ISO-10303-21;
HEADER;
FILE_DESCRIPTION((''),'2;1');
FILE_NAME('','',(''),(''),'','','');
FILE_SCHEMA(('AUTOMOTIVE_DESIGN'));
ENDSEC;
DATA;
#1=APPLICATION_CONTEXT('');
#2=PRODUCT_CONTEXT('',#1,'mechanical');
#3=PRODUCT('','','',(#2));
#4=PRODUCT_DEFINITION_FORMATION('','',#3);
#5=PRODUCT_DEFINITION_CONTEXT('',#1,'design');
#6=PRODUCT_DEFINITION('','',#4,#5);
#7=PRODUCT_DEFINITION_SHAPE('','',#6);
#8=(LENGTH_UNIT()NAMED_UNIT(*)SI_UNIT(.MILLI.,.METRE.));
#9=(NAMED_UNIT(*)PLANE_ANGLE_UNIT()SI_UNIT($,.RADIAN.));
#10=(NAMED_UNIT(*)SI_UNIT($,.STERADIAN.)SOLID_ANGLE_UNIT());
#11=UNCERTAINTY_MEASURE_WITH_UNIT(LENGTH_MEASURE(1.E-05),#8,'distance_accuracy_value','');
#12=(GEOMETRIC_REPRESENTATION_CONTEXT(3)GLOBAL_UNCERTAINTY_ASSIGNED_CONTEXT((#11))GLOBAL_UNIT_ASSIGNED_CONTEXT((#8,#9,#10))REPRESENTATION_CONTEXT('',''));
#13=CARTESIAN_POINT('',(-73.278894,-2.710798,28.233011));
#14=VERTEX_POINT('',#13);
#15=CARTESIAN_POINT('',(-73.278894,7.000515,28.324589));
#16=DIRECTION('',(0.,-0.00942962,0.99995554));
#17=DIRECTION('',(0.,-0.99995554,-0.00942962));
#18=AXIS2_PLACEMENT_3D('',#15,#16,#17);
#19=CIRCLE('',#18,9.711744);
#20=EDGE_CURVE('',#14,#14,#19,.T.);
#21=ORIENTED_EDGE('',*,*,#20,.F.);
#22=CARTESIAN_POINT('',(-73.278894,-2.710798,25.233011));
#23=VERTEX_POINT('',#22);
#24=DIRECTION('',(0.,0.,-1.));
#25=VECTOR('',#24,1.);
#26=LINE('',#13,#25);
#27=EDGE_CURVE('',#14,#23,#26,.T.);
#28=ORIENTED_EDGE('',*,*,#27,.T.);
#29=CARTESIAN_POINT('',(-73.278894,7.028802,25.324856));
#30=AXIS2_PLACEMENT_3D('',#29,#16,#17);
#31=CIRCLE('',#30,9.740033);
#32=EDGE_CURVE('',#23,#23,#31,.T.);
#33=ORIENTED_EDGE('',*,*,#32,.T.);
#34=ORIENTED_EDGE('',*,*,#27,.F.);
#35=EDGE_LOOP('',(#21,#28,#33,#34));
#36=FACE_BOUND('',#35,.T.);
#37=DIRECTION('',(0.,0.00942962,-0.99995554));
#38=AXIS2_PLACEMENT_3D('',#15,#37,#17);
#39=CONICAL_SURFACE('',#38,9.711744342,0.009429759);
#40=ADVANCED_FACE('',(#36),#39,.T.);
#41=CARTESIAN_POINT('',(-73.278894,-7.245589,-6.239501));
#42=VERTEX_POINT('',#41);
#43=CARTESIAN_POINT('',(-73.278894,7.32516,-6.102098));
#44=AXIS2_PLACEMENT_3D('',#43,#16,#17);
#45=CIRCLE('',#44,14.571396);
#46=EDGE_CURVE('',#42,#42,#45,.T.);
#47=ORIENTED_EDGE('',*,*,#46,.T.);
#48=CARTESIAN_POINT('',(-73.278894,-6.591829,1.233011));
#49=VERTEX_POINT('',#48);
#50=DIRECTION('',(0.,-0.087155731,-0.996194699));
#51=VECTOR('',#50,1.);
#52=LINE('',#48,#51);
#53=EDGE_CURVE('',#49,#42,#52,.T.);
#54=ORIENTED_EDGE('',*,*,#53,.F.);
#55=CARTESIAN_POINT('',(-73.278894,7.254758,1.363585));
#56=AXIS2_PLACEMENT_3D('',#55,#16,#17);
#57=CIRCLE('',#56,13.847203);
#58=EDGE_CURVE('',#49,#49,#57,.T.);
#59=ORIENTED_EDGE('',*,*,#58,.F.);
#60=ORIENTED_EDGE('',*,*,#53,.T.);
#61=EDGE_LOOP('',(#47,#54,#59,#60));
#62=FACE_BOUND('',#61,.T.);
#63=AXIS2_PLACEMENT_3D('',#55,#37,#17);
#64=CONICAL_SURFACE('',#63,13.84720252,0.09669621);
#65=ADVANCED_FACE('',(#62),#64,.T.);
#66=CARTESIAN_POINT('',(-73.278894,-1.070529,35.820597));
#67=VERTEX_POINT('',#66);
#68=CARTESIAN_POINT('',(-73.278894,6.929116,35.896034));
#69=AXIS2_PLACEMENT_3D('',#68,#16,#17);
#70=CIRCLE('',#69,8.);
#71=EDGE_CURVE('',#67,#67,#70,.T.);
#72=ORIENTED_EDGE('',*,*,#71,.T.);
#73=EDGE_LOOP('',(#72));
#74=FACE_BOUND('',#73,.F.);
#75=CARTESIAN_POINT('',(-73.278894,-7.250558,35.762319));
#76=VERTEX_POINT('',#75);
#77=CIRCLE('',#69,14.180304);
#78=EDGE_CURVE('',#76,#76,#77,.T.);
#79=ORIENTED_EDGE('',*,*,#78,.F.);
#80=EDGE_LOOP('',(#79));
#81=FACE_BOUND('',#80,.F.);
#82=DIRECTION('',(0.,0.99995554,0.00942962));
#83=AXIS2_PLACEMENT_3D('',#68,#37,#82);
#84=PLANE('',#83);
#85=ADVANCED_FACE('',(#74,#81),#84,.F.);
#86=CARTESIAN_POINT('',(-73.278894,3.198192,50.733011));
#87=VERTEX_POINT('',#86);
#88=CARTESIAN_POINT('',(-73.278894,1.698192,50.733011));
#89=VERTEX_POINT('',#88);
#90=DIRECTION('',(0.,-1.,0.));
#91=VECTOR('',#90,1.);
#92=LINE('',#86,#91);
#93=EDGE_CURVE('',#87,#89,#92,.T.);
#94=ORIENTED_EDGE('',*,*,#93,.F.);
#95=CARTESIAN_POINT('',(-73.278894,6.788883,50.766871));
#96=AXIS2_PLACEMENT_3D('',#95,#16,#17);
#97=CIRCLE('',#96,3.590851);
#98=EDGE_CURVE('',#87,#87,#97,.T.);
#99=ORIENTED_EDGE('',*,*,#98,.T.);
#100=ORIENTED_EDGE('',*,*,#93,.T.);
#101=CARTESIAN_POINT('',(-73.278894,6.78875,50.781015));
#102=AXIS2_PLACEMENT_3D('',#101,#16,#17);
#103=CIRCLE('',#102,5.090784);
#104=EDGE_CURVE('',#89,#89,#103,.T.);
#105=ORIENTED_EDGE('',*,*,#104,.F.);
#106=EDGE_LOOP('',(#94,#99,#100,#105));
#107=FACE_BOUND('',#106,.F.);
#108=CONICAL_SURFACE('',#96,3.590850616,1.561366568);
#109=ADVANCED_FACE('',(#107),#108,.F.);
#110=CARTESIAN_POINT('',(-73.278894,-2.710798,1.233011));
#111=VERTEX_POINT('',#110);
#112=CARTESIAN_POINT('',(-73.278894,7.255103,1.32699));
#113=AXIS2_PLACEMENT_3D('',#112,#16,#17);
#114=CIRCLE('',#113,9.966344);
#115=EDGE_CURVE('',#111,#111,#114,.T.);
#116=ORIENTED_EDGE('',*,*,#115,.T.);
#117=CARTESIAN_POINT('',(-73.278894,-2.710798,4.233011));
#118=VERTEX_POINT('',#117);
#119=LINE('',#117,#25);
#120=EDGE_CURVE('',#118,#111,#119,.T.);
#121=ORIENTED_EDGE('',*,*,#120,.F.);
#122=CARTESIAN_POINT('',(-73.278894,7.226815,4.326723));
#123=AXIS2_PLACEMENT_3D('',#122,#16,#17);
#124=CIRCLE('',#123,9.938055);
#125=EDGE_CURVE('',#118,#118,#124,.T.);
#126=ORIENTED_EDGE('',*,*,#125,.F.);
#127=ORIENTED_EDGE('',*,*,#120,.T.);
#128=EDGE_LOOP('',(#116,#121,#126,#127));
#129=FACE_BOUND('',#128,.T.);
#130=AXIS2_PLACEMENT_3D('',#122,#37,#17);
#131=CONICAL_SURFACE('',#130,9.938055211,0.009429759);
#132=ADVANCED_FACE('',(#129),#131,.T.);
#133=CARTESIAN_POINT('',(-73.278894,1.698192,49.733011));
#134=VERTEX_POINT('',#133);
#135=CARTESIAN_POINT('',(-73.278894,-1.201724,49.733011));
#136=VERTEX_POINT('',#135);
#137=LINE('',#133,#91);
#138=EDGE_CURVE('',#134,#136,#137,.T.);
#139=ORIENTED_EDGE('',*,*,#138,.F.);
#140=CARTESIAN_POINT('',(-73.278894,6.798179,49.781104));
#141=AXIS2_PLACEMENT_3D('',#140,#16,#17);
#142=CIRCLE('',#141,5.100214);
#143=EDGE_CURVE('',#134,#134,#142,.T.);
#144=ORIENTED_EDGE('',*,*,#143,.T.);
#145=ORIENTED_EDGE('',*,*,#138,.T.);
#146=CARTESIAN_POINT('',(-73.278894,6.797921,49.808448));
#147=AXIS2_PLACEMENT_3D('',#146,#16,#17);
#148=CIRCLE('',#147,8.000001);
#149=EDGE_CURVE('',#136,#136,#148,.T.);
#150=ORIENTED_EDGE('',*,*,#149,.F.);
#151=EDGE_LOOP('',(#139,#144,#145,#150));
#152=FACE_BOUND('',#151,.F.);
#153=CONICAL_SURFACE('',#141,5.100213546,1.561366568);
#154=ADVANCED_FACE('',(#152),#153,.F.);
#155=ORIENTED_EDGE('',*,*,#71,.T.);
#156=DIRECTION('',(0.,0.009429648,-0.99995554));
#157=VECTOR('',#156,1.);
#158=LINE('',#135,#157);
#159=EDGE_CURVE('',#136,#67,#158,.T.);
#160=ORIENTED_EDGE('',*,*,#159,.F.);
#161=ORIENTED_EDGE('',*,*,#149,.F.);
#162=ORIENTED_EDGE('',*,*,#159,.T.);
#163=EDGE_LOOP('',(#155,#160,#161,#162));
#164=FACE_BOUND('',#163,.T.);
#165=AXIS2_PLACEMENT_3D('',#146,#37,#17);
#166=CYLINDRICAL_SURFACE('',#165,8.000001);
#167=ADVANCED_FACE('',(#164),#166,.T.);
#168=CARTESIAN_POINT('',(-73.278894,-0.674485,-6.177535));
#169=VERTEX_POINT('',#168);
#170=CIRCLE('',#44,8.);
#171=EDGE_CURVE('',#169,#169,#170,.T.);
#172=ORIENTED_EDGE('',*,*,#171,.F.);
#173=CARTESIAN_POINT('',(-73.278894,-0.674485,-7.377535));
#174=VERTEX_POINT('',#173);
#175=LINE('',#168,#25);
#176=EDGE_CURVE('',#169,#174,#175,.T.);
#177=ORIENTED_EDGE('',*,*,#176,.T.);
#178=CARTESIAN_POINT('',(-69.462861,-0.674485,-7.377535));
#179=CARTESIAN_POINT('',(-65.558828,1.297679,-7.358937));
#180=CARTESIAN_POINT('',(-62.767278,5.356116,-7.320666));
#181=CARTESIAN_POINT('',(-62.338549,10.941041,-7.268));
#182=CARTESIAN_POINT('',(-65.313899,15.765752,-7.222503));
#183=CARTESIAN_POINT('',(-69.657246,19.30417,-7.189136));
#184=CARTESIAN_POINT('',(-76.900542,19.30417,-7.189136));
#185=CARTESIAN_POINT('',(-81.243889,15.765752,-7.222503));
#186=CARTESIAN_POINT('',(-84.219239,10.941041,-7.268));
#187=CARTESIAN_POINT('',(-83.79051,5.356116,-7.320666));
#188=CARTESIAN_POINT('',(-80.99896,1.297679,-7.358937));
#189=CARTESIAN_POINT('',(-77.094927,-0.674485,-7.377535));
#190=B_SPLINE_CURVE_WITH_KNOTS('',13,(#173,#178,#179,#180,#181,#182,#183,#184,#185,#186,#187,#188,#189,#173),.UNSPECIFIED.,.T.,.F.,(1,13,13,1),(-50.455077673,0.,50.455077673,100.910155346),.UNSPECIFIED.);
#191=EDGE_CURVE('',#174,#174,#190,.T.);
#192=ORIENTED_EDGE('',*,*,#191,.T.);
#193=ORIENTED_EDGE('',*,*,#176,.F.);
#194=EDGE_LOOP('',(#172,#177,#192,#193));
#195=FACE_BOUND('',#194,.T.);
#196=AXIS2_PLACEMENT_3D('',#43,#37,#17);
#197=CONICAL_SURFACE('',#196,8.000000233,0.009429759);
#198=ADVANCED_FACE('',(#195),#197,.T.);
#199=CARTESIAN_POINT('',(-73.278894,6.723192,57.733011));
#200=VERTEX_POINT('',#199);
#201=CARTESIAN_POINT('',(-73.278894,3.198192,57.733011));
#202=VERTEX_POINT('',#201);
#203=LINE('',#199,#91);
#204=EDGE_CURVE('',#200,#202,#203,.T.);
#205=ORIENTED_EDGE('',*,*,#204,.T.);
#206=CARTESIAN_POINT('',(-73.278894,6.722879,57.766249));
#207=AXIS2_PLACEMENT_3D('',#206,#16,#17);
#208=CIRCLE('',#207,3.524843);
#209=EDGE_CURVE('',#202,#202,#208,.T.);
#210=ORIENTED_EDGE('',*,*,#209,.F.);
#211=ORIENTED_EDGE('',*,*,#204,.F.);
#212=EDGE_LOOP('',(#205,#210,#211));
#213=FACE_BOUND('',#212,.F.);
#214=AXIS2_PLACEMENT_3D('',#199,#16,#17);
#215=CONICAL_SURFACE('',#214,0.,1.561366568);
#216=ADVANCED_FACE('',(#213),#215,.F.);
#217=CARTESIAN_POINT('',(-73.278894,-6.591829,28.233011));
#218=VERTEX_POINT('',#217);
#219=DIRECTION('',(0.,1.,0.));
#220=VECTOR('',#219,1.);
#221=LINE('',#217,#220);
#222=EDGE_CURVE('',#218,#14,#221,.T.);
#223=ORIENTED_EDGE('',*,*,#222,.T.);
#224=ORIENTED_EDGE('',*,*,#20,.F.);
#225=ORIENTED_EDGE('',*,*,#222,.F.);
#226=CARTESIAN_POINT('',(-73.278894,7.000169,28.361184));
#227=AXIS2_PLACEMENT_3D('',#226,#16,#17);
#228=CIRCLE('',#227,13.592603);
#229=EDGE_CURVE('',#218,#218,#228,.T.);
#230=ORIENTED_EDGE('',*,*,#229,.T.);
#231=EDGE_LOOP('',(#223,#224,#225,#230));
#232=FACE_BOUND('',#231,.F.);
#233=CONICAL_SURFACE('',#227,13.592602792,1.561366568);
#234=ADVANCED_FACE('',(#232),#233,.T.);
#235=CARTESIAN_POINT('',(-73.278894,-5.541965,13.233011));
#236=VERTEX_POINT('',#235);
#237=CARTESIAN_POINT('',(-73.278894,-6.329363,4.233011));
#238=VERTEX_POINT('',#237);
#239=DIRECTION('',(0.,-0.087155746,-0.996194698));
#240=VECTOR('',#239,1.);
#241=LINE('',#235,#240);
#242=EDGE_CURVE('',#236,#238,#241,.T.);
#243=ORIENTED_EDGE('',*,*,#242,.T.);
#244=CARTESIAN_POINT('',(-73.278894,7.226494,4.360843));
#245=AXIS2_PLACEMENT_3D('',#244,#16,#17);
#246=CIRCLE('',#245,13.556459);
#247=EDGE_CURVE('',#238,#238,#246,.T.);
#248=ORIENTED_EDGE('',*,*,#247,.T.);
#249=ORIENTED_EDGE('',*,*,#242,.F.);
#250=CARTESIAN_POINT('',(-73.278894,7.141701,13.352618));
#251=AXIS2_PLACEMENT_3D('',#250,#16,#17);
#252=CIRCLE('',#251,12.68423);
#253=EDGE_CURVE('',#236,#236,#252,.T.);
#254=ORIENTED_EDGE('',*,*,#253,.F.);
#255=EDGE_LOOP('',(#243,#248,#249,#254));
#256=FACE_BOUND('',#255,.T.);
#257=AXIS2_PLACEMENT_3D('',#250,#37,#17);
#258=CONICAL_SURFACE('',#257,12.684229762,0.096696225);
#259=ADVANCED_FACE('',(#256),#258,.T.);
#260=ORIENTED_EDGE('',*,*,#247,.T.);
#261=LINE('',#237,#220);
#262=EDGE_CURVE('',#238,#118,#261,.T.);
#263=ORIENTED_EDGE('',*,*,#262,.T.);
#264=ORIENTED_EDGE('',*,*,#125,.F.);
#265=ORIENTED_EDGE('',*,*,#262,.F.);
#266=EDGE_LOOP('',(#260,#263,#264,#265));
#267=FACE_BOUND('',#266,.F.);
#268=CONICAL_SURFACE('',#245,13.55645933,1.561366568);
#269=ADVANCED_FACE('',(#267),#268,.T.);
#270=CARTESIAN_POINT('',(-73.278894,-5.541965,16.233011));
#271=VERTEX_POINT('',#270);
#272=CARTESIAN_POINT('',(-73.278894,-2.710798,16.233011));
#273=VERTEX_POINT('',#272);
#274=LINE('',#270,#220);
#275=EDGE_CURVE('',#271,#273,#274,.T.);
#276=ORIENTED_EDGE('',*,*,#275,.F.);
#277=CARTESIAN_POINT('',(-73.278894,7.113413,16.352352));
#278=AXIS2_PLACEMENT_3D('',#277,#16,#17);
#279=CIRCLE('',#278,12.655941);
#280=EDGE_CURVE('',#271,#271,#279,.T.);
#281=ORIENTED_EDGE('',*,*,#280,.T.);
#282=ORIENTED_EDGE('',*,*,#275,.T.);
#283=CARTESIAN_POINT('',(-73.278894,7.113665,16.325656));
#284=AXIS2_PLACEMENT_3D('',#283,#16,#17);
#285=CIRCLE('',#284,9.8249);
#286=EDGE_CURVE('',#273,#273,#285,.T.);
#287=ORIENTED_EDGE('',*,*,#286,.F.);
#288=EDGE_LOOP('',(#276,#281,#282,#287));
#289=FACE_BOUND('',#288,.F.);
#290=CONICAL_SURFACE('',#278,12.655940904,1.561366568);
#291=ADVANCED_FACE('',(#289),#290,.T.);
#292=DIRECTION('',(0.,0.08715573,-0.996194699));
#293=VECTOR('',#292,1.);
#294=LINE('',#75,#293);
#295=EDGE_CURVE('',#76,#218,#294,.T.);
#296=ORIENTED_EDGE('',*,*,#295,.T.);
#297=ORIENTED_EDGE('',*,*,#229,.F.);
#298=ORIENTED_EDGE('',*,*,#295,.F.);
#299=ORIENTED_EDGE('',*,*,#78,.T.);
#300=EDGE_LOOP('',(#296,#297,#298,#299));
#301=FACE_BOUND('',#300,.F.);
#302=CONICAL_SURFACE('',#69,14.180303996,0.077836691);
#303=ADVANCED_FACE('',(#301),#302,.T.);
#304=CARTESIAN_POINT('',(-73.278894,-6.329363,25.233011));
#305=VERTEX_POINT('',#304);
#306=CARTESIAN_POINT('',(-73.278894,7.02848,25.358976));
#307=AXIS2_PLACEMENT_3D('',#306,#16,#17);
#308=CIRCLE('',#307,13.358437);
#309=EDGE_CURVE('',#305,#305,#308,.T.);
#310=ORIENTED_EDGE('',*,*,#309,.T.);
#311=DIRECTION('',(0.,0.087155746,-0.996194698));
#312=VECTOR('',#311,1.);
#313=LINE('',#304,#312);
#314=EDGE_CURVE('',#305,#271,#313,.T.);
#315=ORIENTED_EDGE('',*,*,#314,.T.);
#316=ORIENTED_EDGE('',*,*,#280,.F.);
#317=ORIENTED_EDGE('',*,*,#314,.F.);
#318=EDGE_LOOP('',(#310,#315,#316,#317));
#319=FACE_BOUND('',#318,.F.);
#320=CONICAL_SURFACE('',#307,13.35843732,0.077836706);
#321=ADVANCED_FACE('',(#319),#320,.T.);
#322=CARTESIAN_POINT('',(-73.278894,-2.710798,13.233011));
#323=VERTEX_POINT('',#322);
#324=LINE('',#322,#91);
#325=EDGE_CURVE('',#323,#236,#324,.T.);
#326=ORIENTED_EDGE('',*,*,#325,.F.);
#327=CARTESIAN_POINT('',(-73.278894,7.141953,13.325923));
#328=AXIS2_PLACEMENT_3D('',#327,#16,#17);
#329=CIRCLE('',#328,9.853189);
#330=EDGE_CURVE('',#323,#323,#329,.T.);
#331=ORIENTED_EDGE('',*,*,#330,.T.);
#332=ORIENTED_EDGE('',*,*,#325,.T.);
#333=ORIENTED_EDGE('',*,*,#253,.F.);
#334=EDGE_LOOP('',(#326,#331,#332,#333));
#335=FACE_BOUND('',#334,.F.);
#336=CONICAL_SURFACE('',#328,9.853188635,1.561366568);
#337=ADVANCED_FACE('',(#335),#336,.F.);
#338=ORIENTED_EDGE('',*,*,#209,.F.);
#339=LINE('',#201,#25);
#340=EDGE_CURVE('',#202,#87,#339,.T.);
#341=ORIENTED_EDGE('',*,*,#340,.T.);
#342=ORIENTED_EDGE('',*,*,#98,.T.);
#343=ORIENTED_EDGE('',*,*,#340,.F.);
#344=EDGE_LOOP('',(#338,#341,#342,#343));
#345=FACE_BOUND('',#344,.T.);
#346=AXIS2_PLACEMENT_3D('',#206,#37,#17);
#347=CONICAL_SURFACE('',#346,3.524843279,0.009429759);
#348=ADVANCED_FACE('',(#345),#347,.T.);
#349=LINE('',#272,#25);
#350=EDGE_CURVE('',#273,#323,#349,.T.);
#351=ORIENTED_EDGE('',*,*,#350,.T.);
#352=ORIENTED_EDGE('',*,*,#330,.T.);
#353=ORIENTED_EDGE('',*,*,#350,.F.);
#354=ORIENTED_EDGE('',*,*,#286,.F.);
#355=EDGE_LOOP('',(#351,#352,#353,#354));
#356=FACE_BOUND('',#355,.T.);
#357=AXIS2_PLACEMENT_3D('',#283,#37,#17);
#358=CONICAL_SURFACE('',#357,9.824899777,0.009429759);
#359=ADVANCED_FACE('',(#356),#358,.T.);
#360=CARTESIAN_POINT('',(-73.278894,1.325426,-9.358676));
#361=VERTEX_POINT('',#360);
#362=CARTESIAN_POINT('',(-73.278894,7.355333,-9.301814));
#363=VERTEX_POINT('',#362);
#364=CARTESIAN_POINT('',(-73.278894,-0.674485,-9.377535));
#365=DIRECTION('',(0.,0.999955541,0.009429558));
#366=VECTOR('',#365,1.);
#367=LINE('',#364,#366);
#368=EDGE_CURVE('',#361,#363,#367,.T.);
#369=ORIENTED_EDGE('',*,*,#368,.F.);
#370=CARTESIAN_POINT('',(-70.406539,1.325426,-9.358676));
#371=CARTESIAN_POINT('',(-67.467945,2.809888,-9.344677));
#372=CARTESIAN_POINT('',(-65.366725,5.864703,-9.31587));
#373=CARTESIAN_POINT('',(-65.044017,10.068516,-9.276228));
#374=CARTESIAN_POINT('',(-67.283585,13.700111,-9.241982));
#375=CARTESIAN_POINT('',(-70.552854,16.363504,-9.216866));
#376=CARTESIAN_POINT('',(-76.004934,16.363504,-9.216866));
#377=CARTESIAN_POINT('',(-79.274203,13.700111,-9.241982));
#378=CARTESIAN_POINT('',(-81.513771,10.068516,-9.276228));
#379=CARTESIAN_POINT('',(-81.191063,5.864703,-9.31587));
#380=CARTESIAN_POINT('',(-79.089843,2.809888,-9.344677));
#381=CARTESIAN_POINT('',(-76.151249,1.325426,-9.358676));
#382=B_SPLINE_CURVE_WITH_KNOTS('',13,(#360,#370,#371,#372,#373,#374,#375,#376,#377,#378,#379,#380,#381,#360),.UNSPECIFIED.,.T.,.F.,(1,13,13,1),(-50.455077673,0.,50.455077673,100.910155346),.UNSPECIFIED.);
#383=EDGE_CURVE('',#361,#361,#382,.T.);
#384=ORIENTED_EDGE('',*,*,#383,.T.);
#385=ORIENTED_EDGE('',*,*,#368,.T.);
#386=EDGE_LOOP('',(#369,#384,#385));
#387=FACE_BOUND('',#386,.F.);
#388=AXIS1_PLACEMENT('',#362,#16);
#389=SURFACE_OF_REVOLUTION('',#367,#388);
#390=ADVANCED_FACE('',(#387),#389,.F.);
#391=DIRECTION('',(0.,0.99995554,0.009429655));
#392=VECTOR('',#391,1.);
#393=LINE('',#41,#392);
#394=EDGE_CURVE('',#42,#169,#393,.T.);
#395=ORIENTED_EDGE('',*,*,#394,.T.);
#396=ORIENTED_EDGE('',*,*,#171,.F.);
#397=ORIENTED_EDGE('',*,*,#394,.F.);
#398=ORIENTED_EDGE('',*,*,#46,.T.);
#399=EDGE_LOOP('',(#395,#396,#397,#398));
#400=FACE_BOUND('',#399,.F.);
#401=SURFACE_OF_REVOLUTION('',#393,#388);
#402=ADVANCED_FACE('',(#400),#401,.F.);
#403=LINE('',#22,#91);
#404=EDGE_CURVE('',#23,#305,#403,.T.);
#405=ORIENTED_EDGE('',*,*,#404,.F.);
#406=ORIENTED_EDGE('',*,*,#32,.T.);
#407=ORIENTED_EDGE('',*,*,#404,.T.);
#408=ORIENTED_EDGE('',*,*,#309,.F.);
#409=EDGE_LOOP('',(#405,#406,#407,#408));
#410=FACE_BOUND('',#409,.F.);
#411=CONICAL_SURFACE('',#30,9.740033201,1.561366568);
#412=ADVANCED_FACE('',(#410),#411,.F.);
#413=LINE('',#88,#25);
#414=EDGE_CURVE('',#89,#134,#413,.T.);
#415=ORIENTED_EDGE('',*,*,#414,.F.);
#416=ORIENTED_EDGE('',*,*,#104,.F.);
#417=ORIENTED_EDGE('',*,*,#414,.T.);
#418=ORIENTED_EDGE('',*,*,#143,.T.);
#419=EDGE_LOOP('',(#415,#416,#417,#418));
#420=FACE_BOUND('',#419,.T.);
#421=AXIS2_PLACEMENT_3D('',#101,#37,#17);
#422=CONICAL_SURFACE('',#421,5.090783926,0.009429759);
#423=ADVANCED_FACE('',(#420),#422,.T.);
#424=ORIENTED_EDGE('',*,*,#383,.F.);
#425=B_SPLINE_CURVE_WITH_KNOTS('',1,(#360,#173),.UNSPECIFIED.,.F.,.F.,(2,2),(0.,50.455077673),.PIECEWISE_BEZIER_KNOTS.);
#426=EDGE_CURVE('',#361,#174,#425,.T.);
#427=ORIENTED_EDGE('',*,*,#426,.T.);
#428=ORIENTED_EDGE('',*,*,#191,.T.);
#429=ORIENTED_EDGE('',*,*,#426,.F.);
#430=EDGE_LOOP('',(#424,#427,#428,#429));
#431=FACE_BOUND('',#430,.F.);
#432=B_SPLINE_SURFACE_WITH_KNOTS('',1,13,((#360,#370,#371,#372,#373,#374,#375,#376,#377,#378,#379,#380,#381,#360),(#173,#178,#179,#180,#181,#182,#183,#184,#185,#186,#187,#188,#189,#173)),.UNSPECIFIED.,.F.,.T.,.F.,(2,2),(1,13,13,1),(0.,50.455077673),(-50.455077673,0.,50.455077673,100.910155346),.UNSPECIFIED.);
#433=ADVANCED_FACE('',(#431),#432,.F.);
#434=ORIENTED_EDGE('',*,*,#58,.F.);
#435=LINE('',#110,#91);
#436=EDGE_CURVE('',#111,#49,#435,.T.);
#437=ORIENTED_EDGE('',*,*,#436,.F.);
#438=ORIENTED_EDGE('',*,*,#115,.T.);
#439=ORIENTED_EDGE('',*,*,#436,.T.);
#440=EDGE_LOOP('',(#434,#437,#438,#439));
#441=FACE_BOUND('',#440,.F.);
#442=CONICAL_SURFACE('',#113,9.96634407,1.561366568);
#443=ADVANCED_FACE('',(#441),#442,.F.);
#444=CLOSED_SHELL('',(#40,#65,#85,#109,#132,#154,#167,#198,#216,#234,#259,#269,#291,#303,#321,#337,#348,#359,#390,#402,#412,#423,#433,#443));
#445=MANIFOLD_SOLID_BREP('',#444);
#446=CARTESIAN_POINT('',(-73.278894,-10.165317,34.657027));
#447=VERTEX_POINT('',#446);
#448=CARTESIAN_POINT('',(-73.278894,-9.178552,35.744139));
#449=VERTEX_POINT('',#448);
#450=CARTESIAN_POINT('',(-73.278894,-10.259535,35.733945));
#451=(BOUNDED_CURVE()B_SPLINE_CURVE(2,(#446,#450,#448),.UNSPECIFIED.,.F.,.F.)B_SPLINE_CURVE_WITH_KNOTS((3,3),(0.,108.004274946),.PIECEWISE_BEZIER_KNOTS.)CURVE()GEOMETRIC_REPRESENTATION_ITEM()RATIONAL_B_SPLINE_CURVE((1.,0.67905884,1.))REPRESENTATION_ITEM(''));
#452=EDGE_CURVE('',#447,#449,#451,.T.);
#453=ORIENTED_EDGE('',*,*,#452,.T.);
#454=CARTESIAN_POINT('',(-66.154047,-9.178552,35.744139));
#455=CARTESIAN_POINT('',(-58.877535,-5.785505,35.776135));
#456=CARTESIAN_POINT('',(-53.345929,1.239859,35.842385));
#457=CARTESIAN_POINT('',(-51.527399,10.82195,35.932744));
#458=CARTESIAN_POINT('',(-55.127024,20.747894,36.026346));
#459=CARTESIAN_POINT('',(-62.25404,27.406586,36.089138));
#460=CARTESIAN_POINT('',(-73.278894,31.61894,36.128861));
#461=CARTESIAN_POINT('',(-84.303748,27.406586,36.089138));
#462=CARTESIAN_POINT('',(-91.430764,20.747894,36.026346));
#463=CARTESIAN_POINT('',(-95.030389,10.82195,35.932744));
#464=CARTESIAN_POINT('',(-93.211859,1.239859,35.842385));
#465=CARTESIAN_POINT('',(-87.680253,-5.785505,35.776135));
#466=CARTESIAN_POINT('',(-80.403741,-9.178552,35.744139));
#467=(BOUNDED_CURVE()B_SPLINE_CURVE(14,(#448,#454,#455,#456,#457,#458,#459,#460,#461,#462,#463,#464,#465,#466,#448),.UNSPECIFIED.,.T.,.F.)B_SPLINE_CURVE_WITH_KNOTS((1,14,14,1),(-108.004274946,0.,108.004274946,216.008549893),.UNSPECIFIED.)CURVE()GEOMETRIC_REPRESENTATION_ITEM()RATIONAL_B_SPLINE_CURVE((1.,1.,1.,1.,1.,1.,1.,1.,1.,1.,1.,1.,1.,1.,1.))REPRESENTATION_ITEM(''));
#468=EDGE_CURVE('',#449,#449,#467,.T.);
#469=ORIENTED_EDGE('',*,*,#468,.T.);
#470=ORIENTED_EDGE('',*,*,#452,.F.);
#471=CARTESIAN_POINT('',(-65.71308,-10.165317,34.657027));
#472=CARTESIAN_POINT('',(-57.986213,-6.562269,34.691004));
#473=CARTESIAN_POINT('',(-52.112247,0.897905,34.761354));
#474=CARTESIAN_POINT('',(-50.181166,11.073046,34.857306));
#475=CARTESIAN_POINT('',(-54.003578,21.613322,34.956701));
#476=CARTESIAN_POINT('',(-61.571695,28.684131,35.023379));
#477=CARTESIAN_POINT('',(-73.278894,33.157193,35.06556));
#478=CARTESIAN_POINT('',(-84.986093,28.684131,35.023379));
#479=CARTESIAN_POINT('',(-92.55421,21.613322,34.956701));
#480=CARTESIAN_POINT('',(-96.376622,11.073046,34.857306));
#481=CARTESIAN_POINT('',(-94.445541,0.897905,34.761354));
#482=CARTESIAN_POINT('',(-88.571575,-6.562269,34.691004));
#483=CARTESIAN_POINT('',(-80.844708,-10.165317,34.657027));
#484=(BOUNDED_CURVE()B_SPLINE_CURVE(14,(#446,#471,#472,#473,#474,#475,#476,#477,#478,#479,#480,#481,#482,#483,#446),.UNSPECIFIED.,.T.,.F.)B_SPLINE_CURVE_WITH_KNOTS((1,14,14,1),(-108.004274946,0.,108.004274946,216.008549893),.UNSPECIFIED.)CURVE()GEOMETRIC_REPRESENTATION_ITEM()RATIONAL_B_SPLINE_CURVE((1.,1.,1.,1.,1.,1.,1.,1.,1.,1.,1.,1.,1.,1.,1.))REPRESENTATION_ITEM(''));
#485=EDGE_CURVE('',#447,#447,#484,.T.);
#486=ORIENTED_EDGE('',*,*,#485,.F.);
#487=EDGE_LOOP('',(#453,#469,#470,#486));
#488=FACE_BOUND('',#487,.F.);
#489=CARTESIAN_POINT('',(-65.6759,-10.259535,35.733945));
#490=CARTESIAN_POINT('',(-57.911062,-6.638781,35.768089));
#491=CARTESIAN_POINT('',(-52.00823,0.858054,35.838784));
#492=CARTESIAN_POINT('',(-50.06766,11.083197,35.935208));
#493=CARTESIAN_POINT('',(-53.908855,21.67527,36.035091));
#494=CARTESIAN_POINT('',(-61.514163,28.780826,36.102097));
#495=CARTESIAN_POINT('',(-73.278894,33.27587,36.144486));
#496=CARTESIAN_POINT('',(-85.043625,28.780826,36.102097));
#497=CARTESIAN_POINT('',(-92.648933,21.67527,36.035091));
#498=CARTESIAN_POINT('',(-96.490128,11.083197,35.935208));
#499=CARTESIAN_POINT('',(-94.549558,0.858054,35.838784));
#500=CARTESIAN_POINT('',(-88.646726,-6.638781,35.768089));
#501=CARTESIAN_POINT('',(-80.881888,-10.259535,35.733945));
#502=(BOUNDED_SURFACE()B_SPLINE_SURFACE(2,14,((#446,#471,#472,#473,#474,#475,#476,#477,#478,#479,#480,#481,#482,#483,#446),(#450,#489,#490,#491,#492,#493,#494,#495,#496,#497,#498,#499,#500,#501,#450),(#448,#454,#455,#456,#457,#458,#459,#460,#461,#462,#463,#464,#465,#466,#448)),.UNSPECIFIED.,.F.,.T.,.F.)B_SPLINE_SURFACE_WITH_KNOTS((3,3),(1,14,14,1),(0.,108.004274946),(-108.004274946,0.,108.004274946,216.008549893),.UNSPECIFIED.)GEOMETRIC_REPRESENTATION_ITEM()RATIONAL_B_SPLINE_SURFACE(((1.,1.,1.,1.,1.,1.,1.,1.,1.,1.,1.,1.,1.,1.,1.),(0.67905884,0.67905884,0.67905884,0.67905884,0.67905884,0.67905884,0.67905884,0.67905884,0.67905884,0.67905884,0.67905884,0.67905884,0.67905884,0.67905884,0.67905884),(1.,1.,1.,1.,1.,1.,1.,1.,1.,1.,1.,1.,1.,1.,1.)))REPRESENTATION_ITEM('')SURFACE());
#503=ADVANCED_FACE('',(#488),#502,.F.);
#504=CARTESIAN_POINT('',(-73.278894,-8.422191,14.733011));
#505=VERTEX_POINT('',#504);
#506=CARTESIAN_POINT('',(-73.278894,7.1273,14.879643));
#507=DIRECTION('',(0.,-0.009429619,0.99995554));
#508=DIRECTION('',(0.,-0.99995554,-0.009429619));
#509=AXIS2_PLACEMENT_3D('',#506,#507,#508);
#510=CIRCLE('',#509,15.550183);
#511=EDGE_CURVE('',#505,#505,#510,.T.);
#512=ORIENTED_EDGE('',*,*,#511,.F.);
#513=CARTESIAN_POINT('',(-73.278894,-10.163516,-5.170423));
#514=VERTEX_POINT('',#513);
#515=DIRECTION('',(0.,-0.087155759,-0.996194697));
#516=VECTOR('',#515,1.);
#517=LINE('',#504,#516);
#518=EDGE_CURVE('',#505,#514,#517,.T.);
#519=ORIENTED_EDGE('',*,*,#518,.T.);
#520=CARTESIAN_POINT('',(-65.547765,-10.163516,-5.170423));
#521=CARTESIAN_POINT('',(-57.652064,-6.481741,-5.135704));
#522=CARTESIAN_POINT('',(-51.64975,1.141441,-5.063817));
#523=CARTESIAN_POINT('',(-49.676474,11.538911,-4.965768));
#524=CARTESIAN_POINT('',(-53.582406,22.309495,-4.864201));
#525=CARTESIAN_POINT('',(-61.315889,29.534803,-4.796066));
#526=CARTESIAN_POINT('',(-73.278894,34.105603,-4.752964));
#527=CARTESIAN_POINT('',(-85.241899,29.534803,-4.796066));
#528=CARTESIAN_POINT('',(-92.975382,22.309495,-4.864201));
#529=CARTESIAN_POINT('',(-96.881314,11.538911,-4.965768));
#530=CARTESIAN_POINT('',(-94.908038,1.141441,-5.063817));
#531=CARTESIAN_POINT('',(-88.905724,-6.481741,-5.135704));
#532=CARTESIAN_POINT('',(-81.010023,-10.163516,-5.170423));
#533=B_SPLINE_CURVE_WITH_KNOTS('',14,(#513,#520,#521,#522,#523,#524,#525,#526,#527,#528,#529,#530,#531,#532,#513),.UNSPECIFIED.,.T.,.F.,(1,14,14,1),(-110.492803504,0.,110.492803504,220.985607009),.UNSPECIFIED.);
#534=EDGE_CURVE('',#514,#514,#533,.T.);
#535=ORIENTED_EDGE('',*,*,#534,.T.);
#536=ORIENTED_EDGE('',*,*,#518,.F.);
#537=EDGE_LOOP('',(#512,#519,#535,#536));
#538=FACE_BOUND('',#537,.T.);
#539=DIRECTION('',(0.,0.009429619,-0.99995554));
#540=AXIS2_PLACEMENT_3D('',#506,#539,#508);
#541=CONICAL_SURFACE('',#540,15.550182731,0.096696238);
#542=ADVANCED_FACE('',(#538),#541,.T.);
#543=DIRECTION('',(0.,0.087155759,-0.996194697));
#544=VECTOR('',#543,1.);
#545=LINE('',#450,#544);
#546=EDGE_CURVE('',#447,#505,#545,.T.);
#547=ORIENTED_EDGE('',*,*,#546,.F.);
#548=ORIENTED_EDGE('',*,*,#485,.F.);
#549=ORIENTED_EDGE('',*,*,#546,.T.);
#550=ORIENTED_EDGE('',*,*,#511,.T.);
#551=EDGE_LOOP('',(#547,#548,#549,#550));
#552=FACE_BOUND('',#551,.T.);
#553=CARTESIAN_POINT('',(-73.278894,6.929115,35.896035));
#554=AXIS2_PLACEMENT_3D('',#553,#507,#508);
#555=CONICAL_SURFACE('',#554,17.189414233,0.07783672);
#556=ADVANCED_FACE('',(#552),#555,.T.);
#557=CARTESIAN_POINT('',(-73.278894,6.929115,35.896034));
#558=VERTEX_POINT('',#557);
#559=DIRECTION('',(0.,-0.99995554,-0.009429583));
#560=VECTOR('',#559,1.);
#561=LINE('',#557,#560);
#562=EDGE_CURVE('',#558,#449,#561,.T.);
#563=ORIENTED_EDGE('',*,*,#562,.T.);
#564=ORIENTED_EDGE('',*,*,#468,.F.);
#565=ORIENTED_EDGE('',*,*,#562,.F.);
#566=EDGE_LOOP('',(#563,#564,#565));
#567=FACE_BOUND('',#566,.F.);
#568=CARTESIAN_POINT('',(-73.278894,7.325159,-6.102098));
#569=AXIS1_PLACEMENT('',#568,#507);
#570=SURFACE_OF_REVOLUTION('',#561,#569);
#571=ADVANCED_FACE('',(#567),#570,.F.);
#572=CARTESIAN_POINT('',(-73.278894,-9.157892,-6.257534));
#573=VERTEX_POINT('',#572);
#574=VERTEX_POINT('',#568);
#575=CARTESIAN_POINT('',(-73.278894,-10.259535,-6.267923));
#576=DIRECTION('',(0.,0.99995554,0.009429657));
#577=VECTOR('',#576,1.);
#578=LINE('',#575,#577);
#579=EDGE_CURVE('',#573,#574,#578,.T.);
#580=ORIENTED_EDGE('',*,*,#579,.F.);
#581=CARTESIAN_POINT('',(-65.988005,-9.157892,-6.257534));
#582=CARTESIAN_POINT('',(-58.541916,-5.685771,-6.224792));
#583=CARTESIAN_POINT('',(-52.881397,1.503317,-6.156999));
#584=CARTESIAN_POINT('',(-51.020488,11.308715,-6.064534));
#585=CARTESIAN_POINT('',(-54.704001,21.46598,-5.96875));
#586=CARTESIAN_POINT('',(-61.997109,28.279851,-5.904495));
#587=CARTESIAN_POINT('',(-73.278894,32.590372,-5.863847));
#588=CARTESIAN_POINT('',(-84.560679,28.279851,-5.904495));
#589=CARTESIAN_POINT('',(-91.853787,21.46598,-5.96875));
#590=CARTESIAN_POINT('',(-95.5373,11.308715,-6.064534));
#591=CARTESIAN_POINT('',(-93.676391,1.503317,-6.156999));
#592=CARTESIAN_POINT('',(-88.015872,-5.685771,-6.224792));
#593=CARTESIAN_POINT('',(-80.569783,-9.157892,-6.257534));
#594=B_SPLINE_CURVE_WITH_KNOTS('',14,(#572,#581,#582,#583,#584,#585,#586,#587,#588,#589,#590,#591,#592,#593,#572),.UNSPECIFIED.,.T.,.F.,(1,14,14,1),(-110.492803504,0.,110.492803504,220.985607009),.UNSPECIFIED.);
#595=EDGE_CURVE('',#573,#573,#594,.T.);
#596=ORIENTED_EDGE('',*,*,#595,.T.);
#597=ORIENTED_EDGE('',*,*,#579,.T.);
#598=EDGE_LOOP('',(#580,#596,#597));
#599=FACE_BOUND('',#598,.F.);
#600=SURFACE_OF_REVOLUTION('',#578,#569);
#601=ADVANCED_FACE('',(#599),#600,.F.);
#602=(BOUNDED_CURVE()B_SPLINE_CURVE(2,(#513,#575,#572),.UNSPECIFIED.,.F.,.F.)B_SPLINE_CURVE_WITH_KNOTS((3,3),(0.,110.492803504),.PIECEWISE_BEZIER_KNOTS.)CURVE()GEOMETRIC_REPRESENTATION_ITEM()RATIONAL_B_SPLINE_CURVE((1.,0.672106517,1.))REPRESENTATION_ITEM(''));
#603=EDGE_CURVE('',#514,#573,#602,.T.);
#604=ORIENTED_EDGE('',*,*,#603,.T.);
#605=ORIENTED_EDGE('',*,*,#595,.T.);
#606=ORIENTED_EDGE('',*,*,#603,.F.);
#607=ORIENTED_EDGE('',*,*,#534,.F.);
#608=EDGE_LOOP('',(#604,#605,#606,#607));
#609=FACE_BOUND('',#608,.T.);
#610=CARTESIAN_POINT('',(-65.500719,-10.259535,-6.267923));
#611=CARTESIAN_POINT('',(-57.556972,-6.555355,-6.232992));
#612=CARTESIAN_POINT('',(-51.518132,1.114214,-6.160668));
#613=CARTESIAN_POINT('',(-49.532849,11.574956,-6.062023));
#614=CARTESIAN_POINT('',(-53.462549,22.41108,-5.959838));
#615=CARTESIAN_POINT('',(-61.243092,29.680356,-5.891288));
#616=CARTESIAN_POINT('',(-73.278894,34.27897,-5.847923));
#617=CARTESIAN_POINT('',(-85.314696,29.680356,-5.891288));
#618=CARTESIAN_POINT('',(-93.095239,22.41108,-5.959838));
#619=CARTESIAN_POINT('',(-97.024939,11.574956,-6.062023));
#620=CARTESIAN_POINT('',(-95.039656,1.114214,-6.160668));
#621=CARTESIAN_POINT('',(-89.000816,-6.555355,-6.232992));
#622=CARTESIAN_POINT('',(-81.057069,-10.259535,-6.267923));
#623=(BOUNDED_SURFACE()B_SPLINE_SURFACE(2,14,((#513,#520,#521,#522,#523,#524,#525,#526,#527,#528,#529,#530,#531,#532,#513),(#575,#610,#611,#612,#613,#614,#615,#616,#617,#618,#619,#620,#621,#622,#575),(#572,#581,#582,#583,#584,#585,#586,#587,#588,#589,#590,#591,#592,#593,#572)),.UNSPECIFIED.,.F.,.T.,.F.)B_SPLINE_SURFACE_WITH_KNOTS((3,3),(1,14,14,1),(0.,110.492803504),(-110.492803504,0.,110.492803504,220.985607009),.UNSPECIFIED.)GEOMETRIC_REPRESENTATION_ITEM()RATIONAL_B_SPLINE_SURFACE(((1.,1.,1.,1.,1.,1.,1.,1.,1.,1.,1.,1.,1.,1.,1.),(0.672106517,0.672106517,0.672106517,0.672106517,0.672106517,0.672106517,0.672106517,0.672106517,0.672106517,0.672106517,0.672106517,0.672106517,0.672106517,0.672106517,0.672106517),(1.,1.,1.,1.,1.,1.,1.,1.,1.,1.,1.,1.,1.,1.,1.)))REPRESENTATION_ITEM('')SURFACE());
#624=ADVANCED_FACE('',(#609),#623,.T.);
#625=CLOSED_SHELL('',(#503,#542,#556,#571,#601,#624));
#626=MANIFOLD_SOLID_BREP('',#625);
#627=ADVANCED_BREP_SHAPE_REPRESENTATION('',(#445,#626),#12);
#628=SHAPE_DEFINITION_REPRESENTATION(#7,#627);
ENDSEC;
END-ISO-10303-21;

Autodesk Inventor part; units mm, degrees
ref_plane "YZ Plane" through (0, 0, 0) normal (1, 0, 0) x (0, 1, 0)
ref_plane "РабПлоскость1" through (-73.278894, 6.789202, 50.733011) normal (1, 0, 0) x (0, 1, 0)
sketch "Эскиз1" plane through (-73.278894, 6.789202, 50.733011) normal (1, 0, 0) x (0, 1, 0)
  line L0 (-58.5, -54.576442) -> (-56.806889, -56.269553)
  line L1 (-56.806889, -56.269553) -> (-56.806889, -58.269553)
  line L2 (-56.806889, -58.269553) -> (-58.5, -58.269553)
  line L3 (-58.5, -58.269553) -> (-58.5, -84.609012)
  line L4 (-58.5, -84.609012) -> (-61.5, -84.609012)
  line L5 (-61.5, -84.609012) -> (-61.5, -36)
  line L6 (-61.5, -36) -> (-58.5, -36)
  line L7 (-58.5, -36) -> (-58.5, -54.576442)
  circle A0 centre (-40.306889, -36) radius 26
  line L8 (7.025, 0) -> (-7.025, 0)
  line L9 (0.754403, -80) -> (0, 0)
  line L10 (-17.048737, -57.000934) -> (-15.211393, -36)
  line L11 (-15.211393, -36) -> (-17.048737, -14.999066)
  line L12 (-17.048737, -14.999066) -> (0.139913, -14.836977)
  line L13 (-17.048737, -57.000934) -> (0.535957, -56.835109)
  line L14 (-7.463687, -56.910546) -> (-7.990926, -1)
  line L15 (-3.59101, 0) -> (-3.59101, 7)
  line L16 (-3.59101, 7) -> (-0.06601, 7)
  line L17 (-0.06601, 7) -> (0, 0)
  line L18 (-2.035648, -57) -> (-3.035648, -57)
  line L19 (-3.035648, -57) -> (-3.006712, -60.068517)
  line L20 (-2.035648, -57) -> (-2.035648, -45)
  line L21 (-2.035648, -45) -> (0.424352, -45)
  line L22 (-7.990926, -1) -> (-5.09101, -1)
  line L23 (-5.09101, -1) -> (-5.09101, 0)
  line L24 (-7.463687, -56.910546) -> (-7.463687, -60.110546)
  line L25 (-7.463687, -60.110546) -> (0.566131, -60.034825)
  circle A1 centre (-40.306889, -36) radius 25
  line L26 (-14.03976, -14.970692) -> (-12.199934, -36)
  line L27 (-12.199934, -36) -> (-14.034791, -56.972512)
  ellipse E0 centre (0.583116, -80.125072) end of major axis (5.383116, -80.1252) minor radius 0.032213
  point P0 (-6.789202, -50.733011)
  point P1 (-3.46, -57)
  dimension "d0" = 170
  dimension "d1" = 42
  dimension "d6" = 7
  dimension "d8" = 8
  dimension "d10" = 12
  dimension "d11" = 3.525
  dimension "d12" = 1.5
  dimension "d13" = 1
  dimension "d14" = 2.46
  dimension "d15" = 1
  dimension "d58" = 3.2
  dimension "d66" = 1
  dimension "d70" = 3
sketch "Эскиз1 outline for Вращение1" plane through (-73.278894, 6.789202, 50.733011) normal (1, 0, 0) x (0, 1, 0)
  line L0 (-17.048737, -57.000934) -> (0.535957, -56.835109)
  line L1 (-15.211393, -36) -> (-17.048737, -57.000934)
  line L2 (-17.048737, -14.999066) -> (-15.211393, -36)
  line L3 (0.139913, -14.836977) -> (-17.048737, -14.999066)
  line L4 (0.535957, -56.835109) -> (0.139913, -14.836977)
revolve "Вращение1" add sketch "Эскиз1 outline for Вращение1" angle 360 about axis through (-73.278894, 7.543605, -29.266989) along (0, -0.0094296, 0.9999555)
sketch "Эскиз2" plane through (-73.278894, 6.789202, 50.733011) normal (1, 0, 0) x (0, 1, 0)
  line L0 (0.754403, -80) -> (0, 0)
  line L1 (-0.06601, 7) -> (0, 0)
  line L2 (-3.59101, 7) -> (-0.06601, 7)
  line L3 (-3.59101, 0) -> (-3.59101, 7)
  line L4 (7.025, 0) -> (-7.025, 0)
  line L5 (-5.09101, -1) -> (-5.09101, 0)
  line L6 (-7.990926, -1) -> (-5.09101, -1)
  line L7 (-7.463687, -56.910546) -> (-7.990926, -1)
  line L8 (-17.048737, -57.000934) -> (0.535957, -56.835109)
  line L9 (-3.035648, -57) -> (-3.006712, -60.068517)
  line L10 (-2.035648, -57) -> (-2.035648, -45)
  line L11 (-2.035648, -57) -> (-3.035648, -57)
  line L12 (-2.035648, -45) -> (0.424352, -45)
  line L13 (-13.118565, -46.5) -> (-9.5, -46.5)
  line L14 (-9.5, -46.5) -> (-9.5, -49.5)
  line L15 (-9.5, -49.5) -> (-13.381031, -49.5)
  line L16 (-7.463687, -60.110546) -> (0.566131, -60.034825)
  line L17 (-7.463687, -56.910546) -> (-7.463687, -60.110546)
  line L18 (-14.03976, -14.970692) -> (-12.199934, -36)
  line L19 (-12.199934, -36) -> (-14.034791, -56.972512)
  line L20 (-14.03976, -14.970692) -> (-7.859731, -14.912414)
  line L21 (-12.199934, -36) -> (-8, -36) construction
  line L22 (-9.5, -36) -> (-9.5, -37.5)
  line L23 (-9.5, -37.5) -> (-12.331167, -37.5)
  line L24 (-13.118565, -25.5) -> (-9.5, -25.5)
  line L25 (-9.5, -25.5) -> (-9.5, -22.5)
  line L26 (-9.5, -22.5) -> (-13.381031, -22.5)
  line L27 (-9.5, -36) -> (-9.5, -34.5)
  line L28 (-9.5, -34.5) -> (-12.331167, -34.5)
  point P0 (0.535957, -56.835109)
  point P1 (-3.46, -57)
  point P2 (-2.035648, -56.85936)
  dimension "d71" = 3
  dimension "d72" = 1.5
  dimension "d73" = 1.5
sketch "Эскиз2 outline for Вращение2" plane through (-73.278894, 6.789202, 50.733011) normal (1, 0, 0) x (0, 1, 0)
  line L0 (-9.5, -46.5) -> (-9.5, -49.5)
  line L1 (-9.5, -49.5) -> (-13.381031, -49.5)
  line L2 (-13.381031, -49.5) -> (-14.034791, -56.972512)
  line L3 (-14.034791, -56.972512) -> (-7.463687, -56.910546)
  line L4 (-7.463687, -56.910546) -> (-7.463687, -60.110546)
  line L5 (-7.463687, -60.110546) -> (0.566131, -60.034825)
  line L6 (0.566131, -60.034825) -> (-0.06601, 7)
  line L7 (-0.06601, 7) -> (-3.59101, 7)
  line L8 (-3.59101, 7) -> (-3.59101, 0)
  line L9 (-3.59101, 0) -> (-5.09101, 0)
  line L10 (-5.09101, 0) -> (-5.09101, -1)
  line L11 (-5.09101, -1) -> (-7.990926, -1)
  line L12 (-7.990926, -1) -> (-7.859731, -14.912414)
  line L13 (-7.859731, -14.912414) -> (-14.03976, -14.970692)
  line L14 (-14.03976, -14.970692) -> (-13.381031, -22.5)
  line L15 (-13.381031, -22.5) -> (-9.5, -22.5)
  line L16 (-9.5, -22.5) -> (-9.5, -25.5)
  line L17 (-9.5, -25.5) -> (-13.118565, -25.5)
  line L18 (-13.118565, -25.5) -> (-12.331167, -34.5)
  line L19 (-12.331167, -34.5) -> (-9.5, -34.5)
  line L20 (-9.5, -34.5) -> (-9.5, -37.5)
  line L21 (-9.5, -37.5) -> (-12.331167, -37.5)
  line L22 (-12.331167, -37.5) -> (-13.118565, -46.5)
  line L23 (-13.118565, -46.5) -> (-9.5, -46.5)
revolve "Вращение2" add sketch "Эскиз2 outline for Вращение2" angle 360 about axis through (-73.278894, 7.543605, -29.266989) along (0, -0.0094296, 0.9999555) separate body
sketch "Эскиз3" plane through (-73.406488, 6.789202, 4.233011) normal (0, 0, -1) x (-1, 0, 0)
  arc A0 (11.276311, -4.104242) -> (11.276311, 4.104242) centre (0, 0) ccw
  arc A1 (8.92708, -3.249191) -> (8.92708, 3.249191) centre (0, 0) ccw
  line L0 (8.92708, -3.249191) -> (11.276311, -4.104242)
  line L1 (8.92708, 3.249191) -> (11.276311, 4.104242)
  circle A2 centre (0, 0) radius 3.525 construction
  point P0 (-73.406488, -6.789202)
  point P1 (8, 0)
  dimension "d30" = 2.5
  dimension "d31" = 40
  dimension "d32" = 20
  dimension "d74" = 12
extrude "Выдавливание1" [suppressed]
pattern_circular "Круговой массив2" [suppressed]
fillet "Сопряжение1" radius 1 2 edges at (-73.2789, 24.1178, 36.0581) (-73.2789, 24.9099, -5.9363)
sketch "Эскиз4" plane through (-73.278894, 6.789202, 50.733011) normal (1, 0, 0) x (0, 1, 0)
  line L0 (17.019009, -56.679673) -> (-15.947094, -56.990545)
  line L1 (-15.967754, -14.988873) -> (16.24758, -14.685081)
  line L2 (-15.967754, -14.988873) -> (16.24758, -14.685081)
  line L3 (16.24758, -14.685081) -> (19.566131, -14.685081)
  line L4 (19.566131, -14.685081) -> (19.566131, -60.034825)
  line L5 (19.566131, -60.034825) -> (0.566131, -60.034825)
  line L6 (0, -60.034825) -> (0, -15)
  line L7 (-7.463687, -60.110546) -> (0.566131, -60.034825)
  point P0 (-6.789202, -50.733011)
  dimension "d40" = 19
revolve "Вращение3" [suppressed]
feature "Комбинировать1" [suppressed]
ref_plane "РабПлоскость3" through (-73.278894, 23.808211, -5.946662) normal (0, 0.0094296, -0.9999555) x (-1, 0, 0)
feature "Разделение3" [suppressed]
feature "Разделение4" [suppressed]
sketch "Эскиз5" plane through (-73.406488, 6.789202, -6.266989) normal (0, 0, -1) x (-1, 0, 0)
  circle A0 centre (0, 0) radius 3.46
  circle A1 centre (0, 0) radius 2.46
  arc A2 (0, -19) -> (0, 19) centre (0, 0) ccw
  arc A3 (0, -15.211393) -> (0, 15.211393) centre (0, 0) ccw
  circle A4 centre (0, 0) radius 21
  arc A5 (0, 19) -> (0, -19) centre (0, 0) ccw
  point P0 (-73.406488, -6.789202)
  dimension "d42" = 2
extrude "Выдавливание2" [suppressed]
sketch "Эскиз6" plane through (-73.406488, 6.789202, 35.733011) normal (0, 0, 1) x (1, 0, 0)
  line L0 (0, 19) -> (0, 15.957347)
  arc A0 (0, 15.957347) -> (0, -15.957347) centre (0, 0) ccw
  line L1 (0, -15.957347) -> (0, -19)
  arc A1 (0, 19) -> (0, -19) centre (0, 0) ccw
  circle A2 centre (0, 0) radius 8
  arc A3 (0, -15.957347) -> (0, 15.957347) centre (0, 0) ccw
  arc A4 (0, 15.211393) -> (0, -15.211393) centre (0, 0) ccw
  arc A5 (0, -19) -> (0, 19) centre (0, 0) ccw
  circle A6 centre (0, 0) radius 21
  circle A7 centre (0, 11.834908) radius 1.856866
  circle A8 centre (-9.252903, 7.378944) radius 1.856866
  circle A9 centre (-11.538182, -2.633515) radius 1.856866
  circle A10 centre (-5.134974, -10.662883) radius 1.856866
  circle A11 centre (5.134974, -10.662883) radius 1.856866
  circle A12 centre (11.538182, -2.633515) radius 1.856866
  circle A13 centre (9.252903, 7.378944) radius 1.856866
  circle A14 centre (0, 0) radius 14.037196
  circle A15 centre (0, 0) radius 8
  point P0 (73.406488, -6.789202)
  point P1 (-4.698463, -1.710101)
  point P2 (-1.710101, -4.698463)
  point P3 (0, 19)
  dimension "d45" = 2
  dimension "d64" = 360
extrude "Выдавливание3" [suppressed]
extrude "Выдавливание4" [suppressed]
extrude "Выдавливание6" [suppressed]
feature "Толщина1" [suppressed]
feature "Толщина2" [suppressed]
feature "Толщина3" [suppressed]
feature "Толщина4" [suppressed]
chamfer "Фаска1" distance 2 angle 45 1 edges at (-73.2789, 15.3852, -9.2261)
equation "\"d50\" = backflash"
equation "\"d79\" = backflash"
equation "\"d54\" = backflash"
equation "\"d80\" = backflash"
equation "\"backflash\" = 0.12"
properties part number "vall"
